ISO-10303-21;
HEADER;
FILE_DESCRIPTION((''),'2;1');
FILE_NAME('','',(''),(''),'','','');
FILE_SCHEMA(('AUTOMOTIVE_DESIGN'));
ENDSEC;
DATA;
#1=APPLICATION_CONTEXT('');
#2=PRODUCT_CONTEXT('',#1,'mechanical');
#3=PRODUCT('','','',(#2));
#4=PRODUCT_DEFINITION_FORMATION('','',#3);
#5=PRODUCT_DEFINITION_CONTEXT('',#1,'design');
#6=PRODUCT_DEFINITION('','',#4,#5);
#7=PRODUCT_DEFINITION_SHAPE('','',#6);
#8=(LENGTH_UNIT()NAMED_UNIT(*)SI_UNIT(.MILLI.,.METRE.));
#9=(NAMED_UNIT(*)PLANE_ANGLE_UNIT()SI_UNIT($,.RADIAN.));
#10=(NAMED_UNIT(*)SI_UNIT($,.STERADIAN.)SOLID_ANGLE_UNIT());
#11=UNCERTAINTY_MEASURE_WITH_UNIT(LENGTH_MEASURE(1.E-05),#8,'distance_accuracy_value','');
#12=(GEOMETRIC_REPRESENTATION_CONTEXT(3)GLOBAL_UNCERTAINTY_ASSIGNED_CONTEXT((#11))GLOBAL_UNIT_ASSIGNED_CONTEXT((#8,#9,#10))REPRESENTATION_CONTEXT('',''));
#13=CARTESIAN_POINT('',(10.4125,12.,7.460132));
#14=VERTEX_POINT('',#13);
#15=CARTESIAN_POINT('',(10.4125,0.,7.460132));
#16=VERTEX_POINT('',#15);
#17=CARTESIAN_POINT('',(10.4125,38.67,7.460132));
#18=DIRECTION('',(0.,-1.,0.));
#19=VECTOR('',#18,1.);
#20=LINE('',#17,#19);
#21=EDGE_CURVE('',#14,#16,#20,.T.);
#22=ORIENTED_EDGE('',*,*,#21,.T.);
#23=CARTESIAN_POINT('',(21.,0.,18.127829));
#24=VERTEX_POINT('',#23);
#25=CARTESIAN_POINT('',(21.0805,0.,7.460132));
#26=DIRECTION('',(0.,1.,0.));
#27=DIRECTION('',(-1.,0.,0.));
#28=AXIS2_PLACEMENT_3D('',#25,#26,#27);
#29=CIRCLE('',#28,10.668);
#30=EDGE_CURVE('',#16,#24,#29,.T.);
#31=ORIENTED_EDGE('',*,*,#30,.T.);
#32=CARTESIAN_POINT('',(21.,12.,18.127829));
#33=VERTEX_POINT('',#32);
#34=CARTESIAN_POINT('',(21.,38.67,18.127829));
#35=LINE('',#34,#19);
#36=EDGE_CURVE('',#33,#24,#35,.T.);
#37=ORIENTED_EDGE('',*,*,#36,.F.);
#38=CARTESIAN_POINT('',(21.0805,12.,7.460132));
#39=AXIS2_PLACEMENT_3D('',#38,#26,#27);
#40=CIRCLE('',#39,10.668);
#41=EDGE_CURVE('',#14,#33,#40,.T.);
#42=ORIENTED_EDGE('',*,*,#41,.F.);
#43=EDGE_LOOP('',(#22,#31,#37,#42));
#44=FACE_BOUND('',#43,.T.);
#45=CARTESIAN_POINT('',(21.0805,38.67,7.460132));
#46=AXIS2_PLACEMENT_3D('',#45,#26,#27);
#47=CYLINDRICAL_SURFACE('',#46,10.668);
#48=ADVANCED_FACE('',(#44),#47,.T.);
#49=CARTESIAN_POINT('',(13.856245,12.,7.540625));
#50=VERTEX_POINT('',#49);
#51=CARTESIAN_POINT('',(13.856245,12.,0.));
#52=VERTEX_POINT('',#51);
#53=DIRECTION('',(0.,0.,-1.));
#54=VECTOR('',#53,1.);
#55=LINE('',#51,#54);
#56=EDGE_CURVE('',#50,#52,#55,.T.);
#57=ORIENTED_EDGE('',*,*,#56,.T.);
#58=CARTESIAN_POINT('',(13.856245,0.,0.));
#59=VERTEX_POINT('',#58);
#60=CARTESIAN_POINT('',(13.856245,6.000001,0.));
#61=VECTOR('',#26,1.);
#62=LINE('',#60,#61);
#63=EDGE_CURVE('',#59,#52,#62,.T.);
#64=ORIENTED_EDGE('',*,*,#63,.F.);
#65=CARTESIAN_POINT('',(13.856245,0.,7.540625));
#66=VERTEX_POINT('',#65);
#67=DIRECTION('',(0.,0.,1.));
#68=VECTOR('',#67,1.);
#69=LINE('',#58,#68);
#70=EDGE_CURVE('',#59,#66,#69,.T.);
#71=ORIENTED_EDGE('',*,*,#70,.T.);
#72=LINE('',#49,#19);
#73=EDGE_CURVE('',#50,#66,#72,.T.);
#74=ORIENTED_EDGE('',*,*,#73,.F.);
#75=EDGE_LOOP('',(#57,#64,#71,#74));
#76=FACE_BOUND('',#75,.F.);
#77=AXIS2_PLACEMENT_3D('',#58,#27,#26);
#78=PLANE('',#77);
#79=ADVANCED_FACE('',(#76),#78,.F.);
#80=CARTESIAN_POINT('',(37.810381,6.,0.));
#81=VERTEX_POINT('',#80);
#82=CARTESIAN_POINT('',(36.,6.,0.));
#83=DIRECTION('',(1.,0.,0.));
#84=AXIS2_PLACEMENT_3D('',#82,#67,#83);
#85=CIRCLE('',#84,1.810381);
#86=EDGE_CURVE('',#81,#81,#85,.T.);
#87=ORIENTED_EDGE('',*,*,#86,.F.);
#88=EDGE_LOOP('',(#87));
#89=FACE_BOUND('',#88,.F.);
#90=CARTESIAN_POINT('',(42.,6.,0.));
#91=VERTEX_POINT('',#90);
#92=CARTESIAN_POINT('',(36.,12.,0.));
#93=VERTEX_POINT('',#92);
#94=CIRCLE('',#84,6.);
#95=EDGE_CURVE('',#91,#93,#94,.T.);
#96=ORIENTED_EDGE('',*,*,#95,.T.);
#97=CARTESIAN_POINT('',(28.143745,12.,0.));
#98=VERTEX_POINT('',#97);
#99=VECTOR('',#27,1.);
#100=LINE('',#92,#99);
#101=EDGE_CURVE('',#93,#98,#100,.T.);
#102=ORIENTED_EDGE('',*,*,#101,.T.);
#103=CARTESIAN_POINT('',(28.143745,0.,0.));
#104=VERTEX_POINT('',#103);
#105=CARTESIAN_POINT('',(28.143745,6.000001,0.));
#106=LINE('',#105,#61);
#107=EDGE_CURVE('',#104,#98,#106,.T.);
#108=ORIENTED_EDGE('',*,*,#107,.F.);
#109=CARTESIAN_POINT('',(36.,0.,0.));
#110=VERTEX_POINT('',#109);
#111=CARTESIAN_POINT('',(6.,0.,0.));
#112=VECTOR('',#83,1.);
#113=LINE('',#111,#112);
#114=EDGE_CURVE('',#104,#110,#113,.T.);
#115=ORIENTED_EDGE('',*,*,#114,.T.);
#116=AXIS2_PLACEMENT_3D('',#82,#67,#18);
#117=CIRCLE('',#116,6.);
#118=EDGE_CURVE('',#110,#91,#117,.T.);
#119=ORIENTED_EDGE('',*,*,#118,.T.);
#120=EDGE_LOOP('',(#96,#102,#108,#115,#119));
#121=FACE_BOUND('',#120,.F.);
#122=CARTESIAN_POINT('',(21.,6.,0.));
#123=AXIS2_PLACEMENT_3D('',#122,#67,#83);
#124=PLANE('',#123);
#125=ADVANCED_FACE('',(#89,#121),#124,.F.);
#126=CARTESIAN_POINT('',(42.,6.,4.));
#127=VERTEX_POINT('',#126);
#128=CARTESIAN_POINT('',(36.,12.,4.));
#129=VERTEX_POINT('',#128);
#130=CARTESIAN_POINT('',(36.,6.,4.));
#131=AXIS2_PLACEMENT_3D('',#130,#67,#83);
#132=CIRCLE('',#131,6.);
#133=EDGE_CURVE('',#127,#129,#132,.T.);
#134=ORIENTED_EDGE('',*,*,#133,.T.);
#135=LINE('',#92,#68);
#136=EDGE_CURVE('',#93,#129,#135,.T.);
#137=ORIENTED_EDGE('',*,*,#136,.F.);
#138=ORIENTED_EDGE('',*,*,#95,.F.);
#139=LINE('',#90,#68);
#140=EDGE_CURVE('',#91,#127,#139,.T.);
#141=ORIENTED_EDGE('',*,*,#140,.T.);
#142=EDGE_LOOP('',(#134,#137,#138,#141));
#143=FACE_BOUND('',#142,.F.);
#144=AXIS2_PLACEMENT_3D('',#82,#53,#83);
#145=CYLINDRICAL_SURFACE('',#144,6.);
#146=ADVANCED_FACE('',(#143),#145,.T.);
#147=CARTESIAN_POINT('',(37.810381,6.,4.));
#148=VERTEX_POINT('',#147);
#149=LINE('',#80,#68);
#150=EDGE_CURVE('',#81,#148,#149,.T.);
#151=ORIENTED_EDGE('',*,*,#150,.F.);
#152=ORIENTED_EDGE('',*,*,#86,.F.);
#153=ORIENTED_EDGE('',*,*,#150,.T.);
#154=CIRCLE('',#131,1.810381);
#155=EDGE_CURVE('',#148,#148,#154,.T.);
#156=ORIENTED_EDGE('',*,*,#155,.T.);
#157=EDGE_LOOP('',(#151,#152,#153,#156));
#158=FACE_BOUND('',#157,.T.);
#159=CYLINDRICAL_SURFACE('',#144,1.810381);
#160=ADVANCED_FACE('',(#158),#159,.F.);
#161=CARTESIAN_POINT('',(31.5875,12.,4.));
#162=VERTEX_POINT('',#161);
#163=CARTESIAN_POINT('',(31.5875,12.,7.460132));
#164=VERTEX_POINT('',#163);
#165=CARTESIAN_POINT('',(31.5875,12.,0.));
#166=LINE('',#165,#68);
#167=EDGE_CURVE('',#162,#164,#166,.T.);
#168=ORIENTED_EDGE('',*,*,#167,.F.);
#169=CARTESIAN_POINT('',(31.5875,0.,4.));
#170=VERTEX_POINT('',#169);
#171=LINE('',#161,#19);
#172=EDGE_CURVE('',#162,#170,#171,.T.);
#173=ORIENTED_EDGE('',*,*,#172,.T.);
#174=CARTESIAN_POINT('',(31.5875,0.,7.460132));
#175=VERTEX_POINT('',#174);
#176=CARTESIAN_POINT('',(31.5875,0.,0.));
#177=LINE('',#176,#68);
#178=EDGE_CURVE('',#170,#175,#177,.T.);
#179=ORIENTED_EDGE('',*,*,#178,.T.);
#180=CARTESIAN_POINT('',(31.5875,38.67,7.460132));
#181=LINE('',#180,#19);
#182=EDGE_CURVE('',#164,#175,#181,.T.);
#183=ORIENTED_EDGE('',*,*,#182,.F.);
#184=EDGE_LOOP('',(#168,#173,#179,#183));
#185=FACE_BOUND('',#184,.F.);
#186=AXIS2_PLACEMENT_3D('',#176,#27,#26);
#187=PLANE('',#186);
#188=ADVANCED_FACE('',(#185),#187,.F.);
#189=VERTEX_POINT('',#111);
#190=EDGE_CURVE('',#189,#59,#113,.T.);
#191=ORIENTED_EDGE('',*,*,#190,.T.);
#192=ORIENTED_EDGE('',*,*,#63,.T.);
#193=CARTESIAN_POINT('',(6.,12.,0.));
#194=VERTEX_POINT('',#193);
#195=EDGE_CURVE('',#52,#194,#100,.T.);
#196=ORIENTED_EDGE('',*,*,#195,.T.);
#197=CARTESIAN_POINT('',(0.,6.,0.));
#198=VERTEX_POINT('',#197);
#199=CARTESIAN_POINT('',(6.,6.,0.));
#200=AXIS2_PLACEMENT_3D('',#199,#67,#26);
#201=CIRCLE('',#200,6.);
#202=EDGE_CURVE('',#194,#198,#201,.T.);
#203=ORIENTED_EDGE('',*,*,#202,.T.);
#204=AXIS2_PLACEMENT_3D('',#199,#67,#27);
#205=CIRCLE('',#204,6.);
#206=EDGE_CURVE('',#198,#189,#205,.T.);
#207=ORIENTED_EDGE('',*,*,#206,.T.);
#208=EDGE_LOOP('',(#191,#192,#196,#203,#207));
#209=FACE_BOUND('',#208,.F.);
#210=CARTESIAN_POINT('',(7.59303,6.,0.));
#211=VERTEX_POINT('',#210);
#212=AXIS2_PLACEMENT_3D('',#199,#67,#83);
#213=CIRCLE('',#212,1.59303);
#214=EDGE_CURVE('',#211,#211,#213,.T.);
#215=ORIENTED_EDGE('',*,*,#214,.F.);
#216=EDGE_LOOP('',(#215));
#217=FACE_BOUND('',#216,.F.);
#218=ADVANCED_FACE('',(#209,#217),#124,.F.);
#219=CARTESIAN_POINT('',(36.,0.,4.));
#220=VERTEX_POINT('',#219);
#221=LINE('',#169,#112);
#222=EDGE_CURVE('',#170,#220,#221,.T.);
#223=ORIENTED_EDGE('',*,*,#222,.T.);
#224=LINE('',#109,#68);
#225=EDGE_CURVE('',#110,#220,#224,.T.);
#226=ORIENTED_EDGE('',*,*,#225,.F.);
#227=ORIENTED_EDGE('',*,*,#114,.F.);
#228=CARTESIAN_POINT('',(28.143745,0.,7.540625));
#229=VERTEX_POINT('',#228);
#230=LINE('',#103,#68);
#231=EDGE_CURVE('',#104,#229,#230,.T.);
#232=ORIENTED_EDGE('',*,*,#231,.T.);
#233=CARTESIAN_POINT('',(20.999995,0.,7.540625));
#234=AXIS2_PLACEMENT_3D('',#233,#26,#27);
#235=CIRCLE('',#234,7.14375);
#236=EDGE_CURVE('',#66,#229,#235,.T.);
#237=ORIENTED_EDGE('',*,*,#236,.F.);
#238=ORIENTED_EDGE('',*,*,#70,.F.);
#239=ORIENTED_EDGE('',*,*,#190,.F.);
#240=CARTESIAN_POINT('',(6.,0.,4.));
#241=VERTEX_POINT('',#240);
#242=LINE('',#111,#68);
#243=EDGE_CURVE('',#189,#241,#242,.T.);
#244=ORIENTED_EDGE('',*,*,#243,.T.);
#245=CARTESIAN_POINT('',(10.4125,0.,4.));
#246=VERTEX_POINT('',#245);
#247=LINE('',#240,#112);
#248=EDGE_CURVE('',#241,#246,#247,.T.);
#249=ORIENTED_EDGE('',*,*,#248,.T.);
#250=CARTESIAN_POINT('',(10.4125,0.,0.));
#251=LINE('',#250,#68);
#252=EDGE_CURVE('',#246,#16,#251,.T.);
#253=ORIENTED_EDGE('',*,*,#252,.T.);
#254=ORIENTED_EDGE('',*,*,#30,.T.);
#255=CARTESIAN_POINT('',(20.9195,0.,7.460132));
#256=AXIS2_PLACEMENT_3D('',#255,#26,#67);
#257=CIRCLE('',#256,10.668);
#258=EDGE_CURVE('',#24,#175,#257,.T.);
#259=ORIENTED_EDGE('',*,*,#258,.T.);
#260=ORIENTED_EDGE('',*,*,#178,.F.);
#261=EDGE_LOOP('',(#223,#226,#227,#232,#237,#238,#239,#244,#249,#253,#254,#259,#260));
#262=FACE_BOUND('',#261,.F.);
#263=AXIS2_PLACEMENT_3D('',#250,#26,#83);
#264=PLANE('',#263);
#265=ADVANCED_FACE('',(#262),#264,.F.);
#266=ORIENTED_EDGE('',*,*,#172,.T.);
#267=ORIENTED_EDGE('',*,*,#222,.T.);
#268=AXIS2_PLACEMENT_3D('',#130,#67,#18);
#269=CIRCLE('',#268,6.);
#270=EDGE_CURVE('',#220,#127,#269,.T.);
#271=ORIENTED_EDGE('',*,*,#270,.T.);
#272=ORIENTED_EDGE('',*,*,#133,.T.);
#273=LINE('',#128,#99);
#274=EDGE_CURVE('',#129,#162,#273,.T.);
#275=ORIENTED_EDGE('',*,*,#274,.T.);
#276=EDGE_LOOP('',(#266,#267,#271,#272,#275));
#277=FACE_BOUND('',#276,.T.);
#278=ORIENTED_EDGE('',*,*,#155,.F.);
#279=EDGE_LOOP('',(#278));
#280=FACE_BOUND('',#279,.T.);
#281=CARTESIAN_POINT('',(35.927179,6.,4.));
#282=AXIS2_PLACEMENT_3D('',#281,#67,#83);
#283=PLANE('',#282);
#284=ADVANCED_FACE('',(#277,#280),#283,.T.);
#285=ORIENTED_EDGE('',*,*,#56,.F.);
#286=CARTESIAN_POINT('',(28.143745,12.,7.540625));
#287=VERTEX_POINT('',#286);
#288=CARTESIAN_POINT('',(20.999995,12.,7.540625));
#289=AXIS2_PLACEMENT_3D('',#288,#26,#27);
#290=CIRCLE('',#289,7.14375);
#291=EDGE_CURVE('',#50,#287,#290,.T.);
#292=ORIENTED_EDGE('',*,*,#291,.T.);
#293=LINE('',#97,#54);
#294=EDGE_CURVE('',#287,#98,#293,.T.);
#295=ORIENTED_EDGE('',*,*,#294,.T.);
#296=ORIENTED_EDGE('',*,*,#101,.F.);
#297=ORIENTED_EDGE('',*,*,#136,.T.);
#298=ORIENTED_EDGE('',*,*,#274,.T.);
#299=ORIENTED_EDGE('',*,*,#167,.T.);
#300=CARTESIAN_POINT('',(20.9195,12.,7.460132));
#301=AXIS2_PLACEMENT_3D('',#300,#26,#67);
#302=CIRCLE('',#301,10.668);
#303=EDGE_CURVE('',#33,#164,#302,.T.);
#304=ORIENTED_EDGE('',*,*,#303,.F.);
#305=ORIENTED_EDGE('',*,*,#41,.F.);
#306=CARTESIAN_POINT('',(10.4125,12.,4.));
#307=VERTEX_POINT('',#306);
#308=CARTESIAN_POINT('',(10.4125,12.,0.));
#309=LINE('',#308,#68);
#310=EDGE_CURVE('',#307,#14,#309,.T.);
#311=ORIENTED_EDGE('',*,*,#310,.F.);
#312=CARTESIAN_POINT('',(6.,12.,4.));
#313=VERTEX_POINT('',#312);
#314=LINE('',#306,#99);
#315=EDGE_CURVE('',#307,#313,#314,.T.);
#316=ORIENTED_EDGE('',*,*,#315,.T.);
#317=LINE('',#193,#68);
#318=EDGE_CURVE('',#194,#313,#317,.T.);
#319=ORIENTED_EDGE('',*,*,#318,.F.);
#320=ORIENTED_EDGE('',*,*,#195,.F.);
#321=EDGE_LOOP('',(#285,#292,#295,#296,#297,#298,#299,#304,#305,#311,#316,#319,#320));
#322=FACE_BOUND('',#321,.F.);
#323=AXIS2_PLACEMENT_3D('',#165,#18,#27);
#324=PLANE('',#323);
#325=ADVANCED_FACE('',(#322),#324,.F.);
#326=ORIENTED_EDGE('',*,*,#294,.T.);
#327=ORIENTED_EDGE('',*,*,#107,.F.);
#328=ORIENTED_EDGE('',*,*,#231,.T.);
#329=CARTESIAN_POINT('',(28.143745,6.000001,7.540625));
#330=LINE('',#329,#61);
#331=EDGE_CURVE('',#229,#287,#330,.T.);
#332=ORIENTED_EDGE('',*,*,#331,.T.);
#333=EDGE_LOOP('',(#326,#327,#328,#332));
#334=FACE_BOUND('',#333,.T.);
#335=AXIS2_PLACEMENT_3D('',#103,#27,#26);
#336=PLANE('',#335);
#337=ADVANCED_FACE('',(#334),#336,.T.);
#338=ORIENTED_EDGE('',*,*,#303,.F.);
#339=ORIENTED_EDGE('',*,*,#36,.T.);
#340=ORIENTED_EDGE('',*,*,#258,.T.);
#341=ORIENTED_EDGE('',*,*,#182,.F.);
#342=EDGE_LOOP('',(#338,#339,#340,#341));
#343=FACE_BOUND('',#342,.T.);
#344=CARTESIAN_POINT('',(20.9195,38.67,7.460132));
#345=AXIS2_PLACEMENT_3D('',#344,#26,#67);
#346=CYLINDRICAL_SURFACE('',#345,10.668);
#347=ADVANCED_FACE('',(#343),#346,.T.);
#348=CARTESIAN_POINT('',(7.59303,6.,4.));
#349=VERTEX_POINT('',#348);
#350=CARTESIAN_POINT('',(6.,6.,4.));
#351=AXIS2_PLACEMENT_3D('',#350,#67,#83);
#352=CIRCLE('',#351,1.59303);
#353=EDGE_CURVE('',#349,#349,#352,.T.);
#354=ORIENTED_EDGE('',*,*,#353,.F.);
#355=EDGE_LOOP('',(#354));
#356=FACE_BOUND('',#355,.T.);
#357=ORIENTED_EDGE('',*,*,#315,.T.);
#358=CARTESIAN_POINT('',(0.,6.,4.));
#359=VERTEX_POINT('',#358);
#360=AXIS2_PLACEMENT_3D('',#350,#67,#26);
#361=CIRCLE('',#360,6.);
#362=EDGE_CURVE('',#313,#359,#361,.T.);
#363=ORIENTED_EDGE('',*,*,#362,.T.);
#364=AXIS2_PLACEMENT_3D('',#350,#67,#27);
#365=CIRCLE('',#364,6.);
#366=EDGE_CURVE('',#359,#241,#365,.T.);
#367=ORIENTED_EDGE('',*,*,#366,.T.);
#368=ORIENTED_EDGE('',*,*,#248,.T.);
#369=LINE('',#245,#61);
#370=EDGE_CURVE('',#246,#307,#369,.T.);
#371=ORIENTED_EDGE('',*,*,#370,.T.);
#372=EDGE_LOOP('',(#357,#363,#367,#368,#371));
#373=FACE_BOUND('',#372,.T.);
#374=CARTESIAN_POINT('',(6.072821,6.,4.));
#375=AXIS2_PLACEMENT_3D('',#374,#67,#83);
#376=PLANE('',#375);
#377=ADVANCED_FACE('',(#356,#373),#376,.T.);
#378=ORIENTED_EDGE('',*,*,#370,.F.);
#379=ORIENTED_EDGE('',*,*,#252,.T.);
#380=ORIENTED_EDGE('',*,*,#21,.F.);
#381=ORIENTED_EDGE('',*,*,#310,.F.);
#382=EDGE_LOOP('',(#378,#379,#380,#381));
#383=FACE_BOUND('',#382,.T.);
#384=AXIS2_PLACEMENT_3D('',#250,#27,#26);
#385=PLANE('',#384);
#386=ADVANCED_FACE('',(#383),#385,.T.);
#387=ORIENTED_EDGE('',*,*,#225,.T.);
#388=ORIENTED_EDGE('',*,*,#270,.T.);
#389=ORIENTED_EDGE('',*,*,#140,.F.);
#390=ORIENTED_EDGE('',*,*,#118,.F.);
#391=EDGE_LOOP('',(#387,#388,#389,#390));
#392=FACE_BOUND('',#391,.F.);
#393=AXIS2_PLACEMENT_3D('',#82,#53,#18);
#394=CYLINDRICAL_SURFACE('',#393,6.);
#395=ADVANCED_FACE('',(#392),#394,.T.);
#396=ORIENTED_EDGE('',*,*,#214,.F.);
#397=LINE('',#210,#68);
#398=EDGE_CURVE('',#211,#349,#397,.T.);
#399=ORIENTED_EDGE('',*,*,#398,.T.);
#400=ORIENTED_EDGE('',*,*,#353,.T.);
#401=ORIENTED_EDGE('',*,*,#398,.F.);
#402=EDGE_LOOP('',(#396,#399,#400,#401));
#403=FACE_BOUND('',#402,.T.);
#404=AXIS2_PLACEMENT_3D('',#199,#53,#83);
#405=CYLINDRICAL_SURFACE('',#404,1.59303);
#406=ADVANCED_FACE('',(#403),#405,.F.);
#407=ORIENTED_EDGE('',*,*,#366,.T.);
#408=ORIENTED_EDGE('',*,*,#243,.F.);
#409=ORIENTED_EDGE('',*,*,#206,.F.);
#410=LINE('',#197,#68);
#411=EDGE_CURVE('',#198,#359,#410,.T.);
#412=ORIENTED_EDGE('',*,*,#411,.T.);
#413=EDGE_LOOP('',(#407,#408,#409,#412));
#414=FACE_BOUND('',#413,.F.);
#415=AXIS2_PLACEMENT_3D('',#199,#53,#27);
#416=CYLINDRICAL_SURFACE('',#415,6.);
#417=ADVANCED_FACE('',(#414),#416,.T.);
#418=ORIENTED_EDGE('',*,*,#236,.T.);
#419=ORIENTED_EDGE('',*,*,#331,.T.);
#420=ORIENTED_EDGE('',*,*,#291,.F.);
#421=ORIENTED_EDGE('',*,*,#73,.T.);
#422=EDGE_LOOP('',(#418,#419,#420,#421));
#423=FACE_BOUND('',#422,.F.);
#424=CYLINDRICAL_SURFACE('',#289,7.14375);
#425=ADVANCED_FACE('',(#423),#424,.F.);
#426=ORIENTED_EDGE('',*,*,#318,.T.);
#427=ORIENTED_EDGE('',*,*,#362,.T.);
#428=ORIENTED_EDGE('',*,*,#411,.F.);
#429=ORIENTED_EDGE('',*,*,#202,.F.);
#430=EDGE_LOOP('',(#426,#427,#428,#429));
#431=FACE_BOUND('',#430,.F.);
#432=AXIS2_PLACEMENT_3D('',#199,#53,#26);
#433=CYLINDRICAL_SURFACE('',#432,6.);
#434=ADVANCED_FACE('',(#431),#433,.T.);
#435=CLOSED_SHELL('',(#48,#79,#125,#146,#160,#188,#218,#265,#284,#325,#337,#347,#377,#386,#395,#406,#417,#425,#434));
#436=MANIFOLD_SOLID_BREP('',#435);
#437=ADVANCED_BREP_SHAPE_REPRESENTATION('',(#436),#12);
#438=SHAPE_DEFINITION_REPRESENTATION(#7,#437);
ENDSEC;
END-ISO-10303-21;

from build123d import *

# Parameters (mm, degrees)
F0_R        = 1.5930303601
F1_DEPTH    = 4
F0_R_2      = 1.8103813353
F0_W        = 18
F0_H        = 12
F0_W_2      = 1.5875
F2_DEPTH    = 18.1281324
F3_R        = 7.14375
F4_DEPTH    = 25.4
F5_W        = 14.2875
F5_H        = 12.0000014
F6_DEPTH    = 7.540625
F7_T1_DEPTH = 65.34


# Not quite as in the source:
# - a fillet or chamfer that OpenCascade refuses, or shapes differently, is made with other operations: its cross-section is extruded or revolved along the edge and cut away or added


with BuildPart() as f1:
    # F0 (on Top) → F1 (new body)
    with BuildSketch(Plane.XY):
        with BuildLine():
            ThreePointArc((0, 6), (1.7573593129, 1.7573593129), (6, 0))
            Line((6, 0), (10.4125, 0))
            Line((10.4125, 0), (10.4125, 12))
            Line((10.4125, 12), (6, 12))
            ThreePointArc((6, 12), (1.7573593129, 10.2426406871), (0, 6))
        make_face()
        with Locations((6, 6)):
            Circle(F0_R, mode=Mode.SUBTRACT)
    extrude(amount=F1_DEPTH)



with BuildPart() as f1b:
    # F0 (on Top) → F1, piece 2 (new body)
    with BuildSketch(Plane.XY):
        with BuildLine():
            Line((31.5875, 12), (31.5875, 0))
            Line((31.5875, 0), (36, 0))
            ThreePointArc((36, 0), (40.2426406871, 1.7573593129), (42, 6))
            ThreePointArc((42, 6), (40.2426406871, 10.2426406871), (36, 12))
            Line((36, 12), (31.5875, 12))
        make_face()
        with Locations((36, 6)):
            Circle(F0_R_2, mode=Mode.SUBTRACT)
    extrude(amount=F1_DEPTH)


with BuildPart() as f1_1:
    add(f1.part)

    add(f1b.part)  # F2 merges F1b
    # F0 (on Top) → F2 (join)
    with BuildSketch(Plane.XY):
        with Locations((21, 6)):
            Rectangle(F0_W, F0_H)
        with Locations((11.20625, 6)):
            Rectangle(F0_W_2, F0_H)
        with Locations((30.79375, 6)):
            Rectangle(F0_W_2, F0_H)
    extrude(amount=F2_DEPTH)

    # F3 (on face) → F4 (cut)
    with BuildSketch(Plane(origin=(0, 12, 0), x_dir=(-1, 0, 0), z_dir=(0, 1, 0))):
        with Locations((-20.9999947, 7.540625)):
            Circle(F3_R)
    extrude(amount=-F4_DEPTH, mode=Mode.SUBTRACT)

    # F5 (on face) → F6 (cut)
    with BuildSketch(Plane.XY):
        with Locations((20.9999947, 6.0000007)):
            Rectangle(F5_W, F5_H)
    extrude(amount=F6_DEPTH, mode=Mode.SUBTRACT)

    # F7: fillet of radius 10.668 on 2 edges, made by hand

    # F7_s2 → F7_t1 (cut)
    with BuildSketch(Plane.XZ.offset(-38.67)):
        with BuildLine():
            ThreePointArc((10.4125, 7.4601324), (13.5370848583, 15.0035475417), (21.0805, 18.1281324))
            Line((21.0805, 18.1281324), (10.4125, 18.1281324))
            Line((10.4125, 18.1281324), (10.4125, 7.4601324))
        make_face()
        with BuildLine():
            ThreePointArc((20.9195, 18.1281324), (28.4629151417, 15.0035475417), (31.5875, 7.4601324))
            Line((31.5875, 7.4601324), (31.5875, 18.1281324))
            Line((31.5875, 18.1281324), (20.9195, 18.1281324))
        make_face()
    extrude(amount=F7_T1_DEPTH, mode=Mode.SUBTRACT)


solid = f1_1.part
